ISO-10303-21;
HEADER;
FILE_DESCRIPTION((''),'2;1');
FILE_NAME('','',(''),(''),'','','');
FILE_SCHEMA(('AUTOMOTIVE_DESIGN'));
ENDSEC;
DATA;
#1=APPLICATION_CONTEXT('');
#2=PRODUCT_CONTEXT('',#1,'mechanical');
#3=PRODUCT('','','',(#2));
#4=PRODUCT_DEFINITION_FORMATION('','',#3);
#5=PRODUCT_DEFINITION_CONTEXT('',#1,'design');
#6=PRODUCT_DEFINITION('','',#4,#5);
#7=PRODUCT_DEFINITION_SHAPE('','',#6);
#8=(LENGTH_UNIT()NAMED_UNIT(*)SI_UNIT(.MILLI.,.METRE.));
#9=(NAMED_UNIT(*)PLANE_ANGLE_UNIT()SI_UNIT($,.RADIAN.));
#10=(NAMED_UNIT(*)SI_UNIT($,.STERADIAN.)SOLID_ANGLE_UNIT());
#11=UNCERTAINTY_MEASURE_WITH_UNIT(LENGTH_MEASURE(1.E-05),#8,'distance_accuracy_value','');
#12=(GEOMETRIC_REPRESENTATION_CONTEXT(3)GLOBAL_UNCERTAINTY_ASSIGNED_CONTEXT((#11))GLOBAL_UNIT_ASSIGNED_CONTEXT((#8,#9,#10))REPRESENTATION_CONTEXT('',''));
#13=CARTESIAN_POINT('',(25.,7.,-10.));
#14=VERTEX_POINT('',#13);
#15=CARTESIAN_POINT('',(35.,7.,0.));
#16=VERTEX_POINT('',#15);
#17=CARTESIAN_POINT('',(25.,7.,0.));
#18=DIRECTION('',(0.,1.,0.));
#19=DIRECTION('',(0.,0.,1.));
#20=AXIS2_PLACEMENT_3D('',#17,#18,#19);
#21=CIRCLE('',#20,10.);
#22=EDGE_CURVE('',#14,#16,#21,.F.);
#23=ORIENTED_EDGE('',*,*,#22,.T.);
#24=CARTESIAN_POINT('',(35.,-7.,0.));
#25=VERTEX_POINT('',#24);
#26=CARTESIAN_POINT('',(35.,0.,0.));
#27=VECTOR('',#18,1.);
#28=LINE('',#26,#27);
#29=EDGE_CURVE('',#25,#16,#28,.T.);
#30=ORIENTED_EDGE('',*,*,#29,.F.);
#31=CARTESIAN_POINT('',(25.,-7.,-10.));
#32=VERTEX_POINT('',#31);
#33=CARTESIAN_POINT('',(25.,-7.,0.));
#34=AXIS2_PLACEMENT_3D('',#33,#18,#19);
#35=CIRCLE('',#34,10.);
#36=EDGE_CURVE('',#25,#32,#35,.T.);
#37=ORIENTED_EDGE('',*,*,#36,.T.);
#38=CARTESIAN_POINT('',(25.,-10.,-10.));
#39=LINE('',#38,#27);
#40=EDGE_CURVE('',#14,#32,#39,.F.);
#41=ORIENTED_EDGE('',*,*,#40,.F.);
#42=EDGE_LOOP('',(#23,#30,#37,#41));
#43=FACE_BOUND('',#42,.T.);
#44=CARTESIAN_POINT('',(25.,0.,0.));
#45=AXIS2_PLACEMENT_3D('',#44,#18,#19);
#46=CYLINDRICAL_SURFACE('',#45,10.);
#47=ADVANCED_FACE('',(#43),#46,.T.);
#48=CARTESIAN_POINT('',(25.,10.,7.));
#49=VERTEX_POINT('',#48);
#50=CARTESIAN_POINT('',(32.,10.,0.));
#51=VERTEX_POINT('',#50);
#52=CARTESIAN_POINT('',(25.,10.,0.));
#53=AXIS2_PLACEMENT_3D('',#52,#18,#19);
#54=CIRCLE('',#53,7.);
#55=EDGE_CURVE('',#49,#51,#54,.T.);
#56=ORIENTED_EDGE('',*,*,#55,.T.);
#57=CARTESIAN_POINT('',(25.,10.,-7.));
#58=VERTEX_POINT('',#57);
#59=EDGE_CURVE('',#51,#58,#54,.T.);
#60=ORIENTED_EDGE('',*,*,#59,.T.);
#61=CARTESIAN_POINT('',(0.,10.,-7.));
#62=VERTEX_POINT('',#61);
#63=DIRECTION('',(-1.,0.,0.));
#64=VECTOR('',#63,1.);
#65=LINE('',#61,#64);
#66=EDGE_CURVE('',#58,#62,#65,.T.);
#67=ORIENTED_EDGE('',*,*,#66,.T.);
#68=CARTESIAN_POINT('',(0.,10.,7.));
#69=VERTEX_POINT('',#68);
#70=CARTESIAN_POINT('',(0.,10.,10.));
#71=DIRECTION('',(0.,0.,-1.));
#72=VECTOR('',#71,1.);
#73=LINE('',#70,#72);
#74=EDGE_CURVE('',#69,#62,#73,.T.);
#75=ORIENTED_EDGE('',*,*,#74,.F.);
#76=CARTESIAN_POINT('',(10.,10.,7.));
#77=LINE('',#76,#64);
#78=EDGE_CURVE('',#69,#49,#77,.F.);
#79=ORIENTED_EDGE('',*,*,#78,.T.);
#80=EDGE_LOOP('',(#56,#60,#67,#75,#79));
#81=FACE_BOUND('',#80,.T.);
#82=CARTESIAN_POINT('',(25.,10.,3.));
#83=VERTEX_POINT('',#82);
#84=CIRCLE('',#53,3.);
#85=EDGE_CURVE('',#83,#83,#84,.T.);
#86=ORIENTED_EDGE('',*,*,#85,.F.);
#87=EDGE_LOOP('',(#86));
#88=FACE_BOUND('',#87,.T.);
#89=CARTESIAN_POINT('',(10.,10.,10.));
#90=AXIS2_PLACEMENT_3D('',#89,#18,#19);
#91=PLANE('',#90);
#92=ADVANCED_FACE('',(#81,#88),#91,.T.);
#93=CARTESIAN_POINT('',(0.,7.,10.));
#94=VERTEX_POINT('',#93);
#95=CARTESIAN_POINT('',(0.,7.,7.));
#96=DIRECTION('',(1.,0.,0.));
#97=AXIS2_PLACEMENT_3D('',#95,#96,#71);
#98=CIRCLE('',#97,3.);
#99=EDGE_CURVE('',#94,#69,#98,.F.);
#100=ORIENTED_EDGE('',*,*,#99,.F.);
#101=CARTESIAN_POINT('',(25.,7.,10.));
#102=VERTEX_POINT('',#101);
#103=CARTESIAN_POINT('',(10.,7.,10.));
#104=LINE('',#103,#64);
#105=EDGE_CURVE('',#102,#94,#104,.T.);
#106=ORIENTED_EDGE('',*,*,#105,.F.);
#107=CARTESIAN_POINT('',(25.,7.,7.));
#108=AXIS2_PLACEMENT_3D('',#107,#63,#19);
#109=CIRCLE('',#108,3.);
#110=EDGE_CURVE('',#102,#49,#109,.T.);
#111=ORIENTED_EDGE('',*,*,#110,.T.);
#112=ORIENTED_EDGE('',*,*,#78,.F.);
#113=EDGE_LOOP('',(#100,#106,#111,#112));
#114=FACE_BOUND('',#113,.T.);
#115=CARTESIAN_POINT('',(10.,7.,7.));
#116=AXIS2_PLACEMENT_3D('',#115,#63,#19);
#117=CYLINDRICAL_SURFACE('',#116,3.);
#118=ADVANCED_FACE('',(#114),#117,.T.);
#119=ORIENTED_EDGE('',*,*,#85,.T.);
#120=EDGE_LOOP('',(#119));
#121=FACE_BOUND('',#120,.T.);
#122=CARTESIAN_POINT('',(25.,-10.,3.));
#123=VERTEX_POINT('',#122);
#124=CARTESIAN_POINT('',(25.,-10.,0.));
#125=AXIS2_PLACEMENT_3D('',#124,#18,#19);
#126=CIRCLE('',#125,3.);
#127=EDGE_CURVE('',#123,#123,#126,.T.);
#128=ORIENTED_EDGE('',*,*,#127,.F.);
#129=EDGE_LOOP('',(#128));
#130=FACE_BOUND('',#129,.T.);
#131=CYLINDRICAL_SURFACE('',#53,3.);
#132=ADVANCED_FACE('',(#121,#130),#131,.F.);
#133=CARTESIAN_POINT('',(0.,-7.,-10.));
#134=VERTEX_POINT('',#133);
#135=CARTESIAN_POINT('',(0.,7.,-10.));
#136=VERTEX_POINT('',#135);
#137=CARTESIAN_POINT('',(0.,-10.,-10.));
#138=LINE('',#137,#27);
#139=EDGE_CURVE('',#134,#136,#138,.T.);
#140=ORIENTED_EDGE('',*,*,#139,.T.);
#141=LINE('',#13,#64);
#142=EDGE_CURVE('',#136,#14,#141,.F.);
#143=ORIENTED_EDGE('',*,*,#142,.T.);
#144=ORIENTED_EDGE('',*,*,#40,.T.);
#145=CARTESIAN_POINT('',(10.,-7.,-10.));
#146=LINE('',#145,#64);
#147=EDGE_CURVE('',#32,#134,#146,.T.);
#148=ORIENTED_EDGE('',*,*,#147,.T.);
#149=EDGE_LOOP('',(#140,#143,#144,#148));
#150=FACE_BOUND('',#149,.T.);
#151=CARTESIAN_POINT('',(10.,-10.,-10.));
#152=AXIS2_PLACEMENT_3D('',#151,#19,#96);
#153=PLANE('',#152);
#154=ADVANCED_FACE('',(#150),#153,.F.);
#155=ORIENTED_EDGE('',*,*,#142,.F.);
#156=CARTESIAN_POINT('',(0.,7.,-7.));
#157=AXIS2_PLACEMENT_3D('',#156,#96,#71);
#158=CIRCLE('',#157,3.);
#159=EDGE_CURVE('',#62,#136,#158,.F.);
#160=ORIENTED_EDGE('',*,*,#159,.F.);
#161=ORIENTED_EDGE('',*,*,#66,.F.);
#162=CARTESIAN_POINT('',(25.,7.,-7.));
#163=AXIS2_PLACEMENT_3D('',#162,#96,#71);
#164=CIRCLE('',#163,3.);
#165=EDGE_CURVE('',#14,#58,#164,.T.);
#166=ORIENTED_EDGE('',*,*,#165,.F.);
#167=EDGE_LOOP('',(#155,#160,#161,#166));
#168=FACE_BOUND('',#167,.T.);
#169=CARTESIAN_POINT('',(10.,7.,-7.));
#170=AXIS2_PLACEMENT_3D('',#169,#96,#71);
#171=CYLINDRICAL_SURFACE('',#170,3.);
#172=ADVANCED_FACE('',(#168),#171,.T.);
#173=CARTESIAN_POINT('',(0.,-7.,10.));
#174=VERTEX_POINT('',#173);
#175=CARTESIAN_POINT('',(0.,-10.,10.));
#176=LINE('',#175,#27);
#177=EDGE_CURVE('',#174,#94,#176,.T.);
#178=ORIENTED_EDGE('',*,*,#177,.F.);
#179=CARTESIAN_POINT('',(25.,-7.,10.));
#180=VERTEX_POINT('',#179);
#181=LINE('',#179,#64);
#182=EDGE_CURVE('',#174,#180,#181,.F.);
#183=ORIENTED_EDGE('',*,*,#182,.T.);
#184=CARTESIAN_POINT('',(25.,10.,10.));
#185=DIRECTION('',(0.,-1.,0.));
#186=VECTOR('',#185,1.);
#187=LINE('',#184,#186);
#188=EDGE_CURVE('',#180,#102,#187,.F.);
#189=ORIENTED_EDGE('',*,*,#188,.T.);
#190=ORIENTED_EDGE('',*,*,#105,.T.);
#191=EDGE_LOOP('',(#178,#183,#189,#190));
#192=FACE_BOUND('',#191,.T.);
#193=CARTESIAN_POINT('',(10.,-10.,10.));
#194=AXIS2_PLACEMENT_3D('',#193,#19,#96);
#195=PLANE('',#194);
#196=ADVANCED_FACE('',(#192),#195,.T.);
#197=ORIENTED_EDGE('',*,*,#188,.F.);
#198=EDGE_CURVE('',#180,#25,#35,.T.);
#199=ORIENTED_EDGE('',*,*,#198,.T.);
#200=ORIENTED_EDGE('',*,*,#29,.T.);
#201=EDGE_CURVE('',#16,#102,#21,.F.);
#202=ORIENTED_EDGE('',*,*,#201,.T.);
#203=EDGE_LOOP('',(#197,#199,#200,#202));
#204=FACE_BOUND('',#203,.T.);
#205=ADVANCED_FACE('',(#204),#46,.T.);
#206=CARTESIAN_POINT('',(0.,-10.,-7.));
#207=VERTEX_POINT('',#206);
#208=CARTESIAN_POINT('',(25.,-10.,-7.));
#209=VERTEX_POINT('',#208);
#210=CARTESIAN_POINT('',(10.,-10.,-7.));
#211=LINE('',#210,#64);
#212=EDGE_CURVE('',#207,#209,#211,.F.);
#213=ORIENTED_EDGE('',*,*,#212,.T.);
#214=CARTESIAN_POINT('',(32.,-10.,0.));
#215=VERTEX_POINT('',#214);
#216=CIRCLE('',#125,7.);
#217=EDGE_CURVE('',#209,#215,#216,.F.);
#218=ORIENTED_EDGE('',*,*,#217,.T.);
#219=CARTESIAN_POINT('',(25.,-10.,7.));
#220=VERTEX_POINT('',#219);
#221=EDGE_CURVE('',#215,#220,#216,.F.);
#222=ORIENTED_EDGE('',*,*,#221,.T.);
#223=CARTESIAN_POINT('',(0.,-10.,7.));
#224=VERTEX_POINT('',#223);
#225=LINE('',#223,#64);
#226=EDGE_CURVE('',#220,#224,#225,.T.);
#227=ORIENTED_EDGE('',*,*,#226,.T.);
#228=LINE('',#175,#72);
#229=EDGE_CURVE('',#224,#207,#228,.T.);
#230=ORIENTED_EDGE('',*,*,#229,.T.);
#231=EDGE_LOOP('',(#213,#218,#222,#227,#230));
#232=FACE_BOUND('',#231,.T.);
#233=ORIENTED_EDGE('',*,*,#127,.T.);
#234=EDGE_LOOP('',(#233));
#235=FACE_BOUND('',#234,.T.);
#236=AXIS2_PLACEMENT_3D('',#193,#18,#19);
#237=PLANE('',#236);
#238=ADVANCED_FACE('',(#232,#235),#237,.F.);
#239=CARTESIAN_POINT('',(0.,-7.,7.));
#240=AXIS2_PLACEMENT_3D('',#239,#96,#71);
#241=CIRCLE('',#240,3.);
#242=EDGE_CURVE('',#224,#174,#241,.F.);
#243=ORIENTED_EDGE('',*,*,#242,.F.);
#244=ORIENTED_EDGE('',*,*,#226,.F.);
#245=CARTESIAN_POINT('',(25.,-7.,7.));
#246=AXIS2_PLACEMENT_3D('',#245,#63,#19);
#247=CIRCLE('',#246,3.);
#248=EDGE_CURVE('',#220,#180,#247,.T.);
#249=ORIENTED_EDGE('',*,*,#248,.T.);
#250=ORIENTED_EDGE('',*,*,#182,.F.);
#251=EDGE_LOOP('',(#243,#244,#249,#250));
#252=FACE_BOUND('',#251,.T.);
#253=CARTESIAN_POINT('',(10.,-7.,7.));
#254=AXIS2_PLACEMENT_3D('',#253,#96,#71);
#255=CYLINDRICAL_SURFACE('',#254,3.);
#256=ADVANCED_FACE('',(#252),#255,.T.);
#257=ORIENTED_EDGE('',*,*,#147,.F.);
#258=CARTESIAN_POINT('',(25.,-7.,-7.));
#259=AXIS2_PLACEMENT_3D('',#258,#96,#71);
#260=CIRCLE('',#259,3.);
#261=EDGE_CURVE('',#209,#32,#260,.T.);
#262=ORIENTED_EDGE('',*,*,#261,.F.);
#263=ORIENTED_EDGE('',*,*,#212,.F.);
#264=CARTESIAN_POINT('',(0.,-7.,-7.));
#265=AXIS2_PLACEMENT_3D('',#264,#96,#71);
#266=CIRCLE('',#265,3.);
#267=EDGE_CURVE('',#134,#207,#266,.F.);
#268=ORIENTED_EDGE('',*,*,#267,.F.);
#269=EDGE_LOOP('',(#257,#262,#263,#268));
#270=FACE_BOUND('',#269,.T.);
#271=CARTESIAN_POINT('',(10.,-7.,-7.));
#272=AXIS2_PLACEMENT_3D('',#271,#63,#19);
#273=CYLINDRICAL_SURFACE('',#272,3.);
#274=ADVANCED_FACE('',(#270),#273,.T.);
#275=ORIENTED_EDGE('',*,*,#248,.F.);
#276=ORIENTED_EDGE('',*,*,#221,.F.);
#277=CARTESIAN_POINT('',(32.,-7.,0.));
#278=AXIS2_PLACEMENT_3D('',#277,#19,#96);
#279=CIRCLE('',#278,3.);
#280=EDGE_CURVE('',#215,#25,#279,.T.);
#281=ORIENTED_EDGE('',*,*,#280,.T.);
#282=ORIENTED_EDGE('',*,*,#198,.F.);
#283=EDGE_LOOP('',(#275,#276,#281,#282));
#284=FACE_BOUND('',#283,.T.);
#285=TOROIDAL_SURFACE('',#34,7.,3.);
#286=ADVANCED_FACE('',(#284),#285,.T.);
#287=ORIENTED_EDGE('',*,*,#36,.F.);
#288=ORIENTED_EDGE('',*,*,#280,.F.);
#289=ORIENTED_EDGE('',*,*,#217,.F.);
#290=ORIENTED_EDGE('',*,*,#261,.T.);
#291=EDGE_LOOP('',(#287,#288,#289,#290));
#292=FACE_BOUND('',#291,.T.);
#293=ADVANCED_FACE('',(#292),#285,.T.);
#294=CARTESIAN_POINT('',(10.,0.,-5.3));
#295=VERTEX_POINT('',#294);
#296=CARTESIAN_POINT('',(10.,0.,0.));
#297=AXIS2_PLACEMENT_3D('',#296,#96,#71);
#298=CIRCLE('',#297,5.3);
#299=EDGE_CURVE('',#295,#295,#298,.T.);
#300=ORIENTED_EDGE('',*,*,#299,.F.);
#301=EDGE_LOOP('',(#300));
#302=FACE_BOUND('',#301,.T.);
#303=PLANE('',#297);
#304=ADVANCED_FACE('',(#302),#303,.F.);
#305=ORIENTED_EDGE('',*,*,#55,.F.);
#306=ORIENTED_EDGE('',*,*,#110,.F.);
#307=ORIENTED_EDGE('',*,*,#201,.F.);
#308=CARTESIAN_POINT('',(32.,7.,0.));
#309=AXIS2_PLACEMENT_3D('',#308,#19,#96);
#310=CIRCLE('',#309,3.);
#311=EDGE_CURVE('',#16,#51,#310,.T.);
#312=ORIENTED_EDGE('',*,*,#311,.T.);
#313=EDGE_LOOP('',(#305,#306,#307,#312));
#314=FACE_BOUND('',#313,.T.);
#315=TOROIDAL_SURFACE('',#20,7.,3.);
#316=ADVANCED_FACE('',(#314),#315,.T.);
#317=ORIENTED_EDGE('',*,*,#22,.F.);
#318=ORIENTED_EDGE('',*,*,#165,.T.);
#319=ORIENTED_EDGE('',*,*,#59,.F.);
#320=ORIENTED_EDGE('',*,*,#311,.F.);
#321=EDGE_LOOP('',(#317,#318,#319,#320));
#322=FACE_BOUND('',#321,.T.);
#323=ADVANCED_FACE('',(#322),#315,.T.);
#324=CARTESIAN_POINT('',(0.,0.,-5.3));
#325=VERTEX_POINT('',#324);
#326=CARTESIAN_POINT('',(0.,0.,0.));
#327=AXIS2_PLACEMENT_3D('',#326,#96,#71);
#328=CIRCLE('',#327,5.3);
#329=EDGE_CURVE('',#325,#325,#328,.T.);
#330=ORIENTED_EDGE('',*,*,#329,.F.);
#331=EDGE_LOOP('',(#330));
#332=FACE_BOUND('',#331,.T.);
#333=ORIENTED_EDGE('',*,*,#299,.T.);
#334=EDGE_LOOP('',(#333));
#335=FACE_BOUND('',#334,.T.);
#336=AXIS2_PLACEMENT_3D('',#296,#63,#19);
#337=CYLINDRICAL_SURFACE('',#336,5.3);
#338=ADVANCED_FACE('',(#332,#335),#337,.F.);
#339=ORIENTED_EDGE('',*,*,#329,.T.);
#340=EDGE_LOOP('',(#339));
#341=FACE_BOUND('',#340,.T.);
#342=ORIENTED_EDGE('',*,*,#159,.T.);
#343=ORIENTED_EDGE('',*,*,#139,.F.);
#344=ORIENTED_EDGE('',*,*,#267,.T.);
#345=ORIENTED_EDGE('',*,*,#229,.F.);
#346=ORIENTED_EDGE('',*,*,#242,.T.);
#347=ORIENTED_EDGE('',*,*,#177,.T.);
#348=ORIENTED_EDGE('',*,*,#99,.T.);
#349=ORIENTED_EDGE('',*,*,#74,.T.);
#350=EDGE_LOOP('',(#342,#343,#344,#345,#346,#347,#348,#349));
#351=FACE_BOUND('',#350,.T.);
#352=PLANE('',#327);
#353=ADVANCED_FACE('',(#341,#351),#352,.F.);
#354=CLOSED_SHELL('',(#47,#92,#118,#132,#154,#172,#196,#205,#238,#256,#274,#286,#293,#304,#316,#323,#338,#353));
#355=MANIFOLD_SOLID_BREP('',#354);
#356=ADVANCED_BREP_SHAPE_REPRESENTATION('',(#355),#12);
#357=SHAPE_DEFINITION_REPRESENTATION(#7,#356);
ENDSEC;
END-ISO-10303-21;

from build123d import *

# Parameters (mm, degrees)
SKETCH1_W                = 20
SKETCH1_H                = 20
SKETCH1_R                = 5.3
BOSS_EXTRUDE1_DEPTH      = 10
SKETCH2_W                = 20
SKETCH2_H                = 20
BOSS_EXTRUDE2_DEPTH      = 5
BOSS_EXTRUDE6_DEPTH      = 20
BOSS_EXTRUDE6_DEPTH_BACK = 5
SKETCH9_W                = 20
SKETCH9_H                = 20
F_6_0_6_DIAMETER_HOLE3_D = 6
FILLET3_R                = 10
FILLET6_R                = 3


with BuildPart() as part:
    # Sketch1 → Boss-Extrude1 (new body)
    with BuildSketch(Plane(origin=(0, 0, 0), x_dir=(0, 0, -1), z_dir=(1, 0, 0))):
        Rectangle(SKETCH1_W, SKETCH1_H)
        Circle(SKETCH1_R, mode=Mode.SUBTRACT)
    extrude(amount=BOSS_EXTRUDE1_DEPTH)

    # Sketch2 → Boss-Extrude2 (add)
    with BuildSketch(Plane(origin=(10, 0, 0), x_dir=(0, 0, -1), z_dir=(1, 0, 0))):
        Rectangle(SKETCH2_W, SKETCH2_H)
    extrude(amount=BOSS_EXTRUDE2_DEPTH)

    # Sketch9 → Boss-Extrude6 (add, two sides: drawn at the far end of the back side and taken through both)
    with BuildSketch(Plane(origin=(15, 0, 0), x_dir=(0, 0, -1), z_dir=(1, 0, 0)).offset(-BOSS_EXTRUDE6_DEPTH_BACK)):
        Rectangle(SKETCH9_W, SKETCH9_H)
    extrude(amount=BOSS_EXTRUDE6_DEPTH + BOSS_EXTRUDE6_DEPTH_BACK)

    # Ø6.0 (6) Diameter Hole3 (through all)
    with Locations(Plane(origin=(25, 10, 0), x_dir=(0, 0, 1), z_dir=(0, 1, 0))):
        with Locations((0, 0)):
            Hole(F_6_0_6_DIAMETER_HOLE3_D / 2)

    # Fillet3
    fillet3_edges = [part.edges().sort_by_distance(p)[0] for p in [
        (35, 0, -10),
        (35, 0, 10),
    ]]
    fillet(fillet3_edges, radius=FILLET3_R - 0.0001)  # a hair under: the kernel refuses the full size

    # Fillet6
    fillet6_edges = [part.edges().sort_by_distance(p)[0] for p in [
        (12.50005, -10, -10),
        (12.50005, -10, 10),
        (32.071097101, -10, -7.071097101),
        (32.071097101, -10, 7.071097101),
        (12.50005, 10, 10),
        (12.50005, 10, -10),
        (32.071097101, 10, -7.071097101),
        (32.071097101, 10, 7.071097101),
    ]]
    fillet(fillet6_edges, radius=FILLET6_R)


solid = part.part
